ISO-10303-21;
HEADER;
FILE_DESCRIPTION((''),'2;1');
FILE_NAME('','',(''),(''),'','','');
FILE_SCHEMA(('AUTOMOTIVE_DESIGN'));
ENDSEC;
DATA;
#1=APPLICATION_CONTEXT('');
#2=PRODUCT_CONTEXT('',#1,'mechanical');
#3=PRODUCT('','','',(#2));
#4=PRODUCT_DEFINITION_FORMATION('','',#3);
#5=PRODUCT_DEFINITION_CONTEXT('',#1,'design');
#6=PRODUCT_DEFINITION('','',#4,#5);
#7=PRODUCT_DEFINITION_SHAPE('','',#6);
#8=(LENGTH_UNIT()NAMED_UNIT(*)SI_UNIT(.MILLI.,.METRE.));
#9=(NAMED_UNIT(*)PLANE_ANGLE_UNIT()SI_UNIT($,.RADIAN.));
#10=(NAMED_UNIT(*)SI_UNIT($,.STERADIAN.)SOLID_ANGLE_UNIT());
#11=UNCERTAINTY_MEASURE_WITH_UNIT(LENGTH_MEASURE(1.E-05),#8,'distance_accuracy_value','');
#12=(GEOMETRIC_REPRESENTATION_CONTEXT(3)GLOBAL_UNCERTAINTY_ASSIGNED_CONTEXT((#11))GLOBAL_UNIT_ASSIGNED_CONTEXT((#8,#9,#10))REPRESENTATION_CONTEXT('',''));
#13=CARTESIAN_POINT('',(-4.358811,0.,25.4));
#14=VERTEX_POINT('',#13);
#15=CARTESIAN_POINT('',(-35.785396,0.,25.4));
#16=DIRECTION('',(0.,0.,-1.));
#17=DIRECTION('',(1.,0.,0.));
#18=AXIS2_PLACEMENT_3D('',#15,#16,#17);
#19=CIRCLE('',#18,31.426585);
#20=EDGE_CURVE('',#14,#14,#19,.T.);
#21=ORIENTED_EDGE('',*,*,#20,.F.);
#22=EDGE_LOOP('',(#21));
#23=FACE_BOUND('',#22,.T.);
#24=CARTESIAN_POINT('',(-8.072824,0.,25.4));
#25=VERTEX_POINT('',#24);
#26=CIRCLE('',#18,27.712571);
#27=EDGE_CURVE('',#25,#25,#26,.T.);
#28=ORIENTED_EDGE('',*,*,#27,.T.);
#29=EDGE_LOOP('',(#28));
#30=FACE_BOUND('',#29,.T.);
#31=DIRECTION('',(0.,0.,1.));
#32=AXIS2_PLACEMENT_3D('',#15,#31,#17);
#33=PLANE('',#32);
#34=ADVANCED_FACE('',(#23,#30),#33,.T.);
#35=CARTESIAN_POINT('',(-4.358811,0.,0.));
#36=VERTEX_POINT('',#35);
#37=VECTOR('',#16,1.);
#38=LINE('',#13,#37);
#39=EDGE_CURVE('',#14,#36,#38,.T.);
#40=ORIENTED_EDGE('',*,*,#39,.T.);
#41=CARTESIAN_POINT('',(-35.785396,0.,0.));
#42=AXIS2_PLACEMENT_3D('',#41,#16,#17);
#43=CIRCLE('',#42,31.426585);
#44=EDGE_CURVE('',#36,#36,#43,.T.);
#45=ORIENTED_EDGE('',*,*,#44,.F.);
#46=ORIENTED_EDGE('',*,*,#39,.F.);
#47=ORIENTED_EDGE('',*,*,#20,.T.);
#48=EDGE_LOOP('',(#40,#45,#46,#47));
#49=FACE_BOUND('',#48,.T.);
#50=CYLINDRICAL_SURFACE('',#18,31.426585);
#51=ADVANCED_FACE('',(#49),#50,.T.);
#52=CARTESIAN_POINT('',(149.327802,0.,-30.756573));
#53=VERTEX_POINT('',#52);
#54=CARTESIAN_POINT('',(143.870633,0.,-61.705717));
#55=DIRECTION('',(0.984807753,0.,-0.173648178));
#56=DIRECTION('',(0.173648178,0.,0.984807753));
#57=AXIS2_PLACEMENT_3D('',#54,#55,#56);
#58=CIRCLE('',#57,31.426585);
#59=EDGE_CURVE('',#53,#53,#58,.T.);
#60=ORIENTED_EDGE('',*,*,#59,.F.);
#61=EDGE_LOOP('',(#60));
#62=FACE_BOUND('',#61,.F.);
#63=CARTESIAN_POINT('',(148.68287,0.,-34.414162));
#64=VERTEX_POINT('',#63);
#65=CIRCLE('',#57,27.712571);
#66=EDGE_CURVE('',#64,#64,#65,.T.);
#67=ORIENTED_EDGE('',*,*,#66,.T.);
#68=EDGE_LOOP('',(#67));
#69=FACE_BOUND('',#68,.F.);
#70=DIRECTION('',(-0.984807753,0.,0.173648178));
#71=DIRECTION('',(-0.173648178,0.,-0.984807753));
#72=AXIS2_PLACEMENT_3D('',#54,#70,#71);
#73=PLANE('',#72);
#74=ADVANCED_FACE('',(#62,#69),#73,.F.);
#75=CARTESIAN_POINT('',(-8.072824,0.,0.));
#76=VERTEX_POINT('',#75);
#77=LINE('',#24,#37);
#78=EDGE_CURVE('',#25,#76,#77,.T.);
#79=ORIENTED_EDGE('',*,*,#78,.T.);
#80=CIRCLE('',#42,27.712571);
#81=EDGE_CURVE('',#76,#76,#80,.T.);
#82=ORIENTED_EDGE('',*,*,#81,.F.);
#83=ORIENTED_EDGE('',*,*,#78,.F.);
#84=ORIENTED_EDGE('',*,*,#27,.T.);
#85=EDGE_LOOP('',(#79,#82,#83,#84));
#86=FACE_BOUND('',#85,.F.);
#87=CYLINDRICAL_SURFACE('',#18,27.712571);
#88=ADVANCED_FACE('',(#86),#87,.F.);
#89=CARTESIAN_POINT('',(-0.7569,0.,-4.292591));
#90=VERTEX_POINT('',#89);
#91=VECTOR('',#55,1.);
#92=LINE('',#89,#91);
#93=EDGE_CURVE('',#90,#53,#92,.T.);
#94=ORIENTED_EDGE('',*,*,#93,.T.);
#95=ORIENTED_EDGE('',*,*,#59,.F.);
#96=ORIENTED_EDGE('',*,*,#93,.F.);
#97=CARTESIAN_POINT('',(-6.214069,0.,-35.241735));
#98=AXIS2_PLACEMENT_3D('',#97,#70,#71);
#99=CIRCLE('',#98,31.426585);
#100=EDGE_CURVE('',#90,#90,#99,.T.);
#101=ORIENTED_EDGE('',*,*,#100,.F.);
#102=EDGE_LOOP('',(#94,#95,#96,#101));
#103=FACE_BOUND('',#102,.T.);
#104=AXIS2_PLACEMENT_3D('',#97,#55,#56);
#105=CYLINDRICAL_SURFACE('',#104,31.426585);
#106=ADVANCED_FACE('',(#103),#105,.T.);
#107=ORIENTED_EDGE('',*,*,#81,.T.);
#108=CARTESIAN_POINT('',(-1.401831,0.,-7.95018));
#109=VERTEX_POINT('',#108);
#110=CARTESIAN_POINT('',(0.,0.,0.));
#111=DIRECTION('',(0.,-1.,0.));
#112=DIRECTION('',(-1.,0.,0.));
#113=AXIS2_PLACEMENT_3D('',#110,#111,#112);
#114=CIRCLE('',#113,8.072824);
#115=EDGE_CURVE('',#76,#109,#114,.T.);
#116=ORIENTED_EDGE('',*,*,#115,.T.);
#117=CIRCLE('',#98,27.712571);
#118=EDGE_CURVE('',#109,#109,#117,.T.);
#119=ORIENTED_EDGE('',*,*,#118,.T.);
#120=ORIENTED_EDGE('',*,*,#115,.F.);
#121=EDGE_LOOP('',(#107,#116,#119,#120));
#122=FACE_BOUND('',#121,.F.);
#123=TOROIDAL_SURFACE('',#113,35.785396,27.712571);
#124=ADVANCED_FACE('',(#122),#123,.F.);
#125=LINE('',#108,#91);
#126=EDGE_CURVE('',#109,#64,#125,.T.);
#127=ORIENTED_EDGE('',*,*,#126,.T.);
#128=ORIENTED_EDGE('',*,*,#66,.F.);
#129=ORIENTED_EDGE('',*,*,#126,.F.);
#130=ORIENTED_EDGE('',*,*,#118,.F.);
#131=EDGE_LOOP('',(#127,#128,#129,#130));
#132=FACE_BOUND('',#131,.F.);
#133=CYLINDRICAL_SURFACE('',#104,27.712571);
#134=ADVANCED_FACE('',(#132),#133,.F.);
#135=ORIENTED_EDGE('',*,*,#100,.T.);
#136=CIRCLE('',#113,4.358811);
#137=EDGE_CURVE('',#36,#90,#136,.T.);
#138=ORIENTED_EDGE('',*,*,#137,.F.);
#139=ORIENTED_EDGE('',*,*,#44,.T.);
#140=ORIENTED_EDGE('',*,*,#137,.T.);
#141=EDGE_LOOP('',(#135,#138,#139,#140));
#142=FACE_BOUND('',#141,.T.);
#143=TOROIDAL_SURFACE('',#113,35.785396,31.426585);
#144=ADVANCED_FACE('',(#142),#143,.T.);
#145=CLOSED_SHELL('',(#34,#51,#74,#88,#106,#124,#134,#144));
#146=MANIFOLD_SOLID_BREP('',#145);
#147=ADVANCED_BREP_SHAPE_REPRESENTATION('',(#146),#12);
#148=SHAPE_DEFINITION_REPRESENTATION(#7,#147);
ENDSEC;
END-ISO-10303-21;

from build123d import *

# Parameters (mm, degrees)
F1_R   = 31.4265848645
F1_R_2 = 27.7125712081


# Not quite as in the source:
# - the program builds the solid bodies; features that only make, move or delete a surface that nothing else refers to are left out


with BuildPart() as f2:
    # F2: sweep along a path in F0
    with BuildLine(Plane.XZ) as f2_path:
        Line((-35.56, 25.4), (-35.56, 0))
        ThreePointArc((-35.56, 0), (-27.2405403973, -22.8575274005), (-6.1749291978, -35.0197636971))
        Line((-6.1749291978, -35.0197636971), (143.9097723612, -61.4837459736))
    # F1 (on Top) → F2 (sweep)
    with BuildSketch(Plane.XY):
        with Locations((-35.7853956521, 0)):
            Circle(F1_R)
        with Locations((-35.7853956521, 0)):
            Circle(F1_R_2, mode=Mode.SUBTRACT)
    sweep(path=f2_path.line)


solid = f2.part
